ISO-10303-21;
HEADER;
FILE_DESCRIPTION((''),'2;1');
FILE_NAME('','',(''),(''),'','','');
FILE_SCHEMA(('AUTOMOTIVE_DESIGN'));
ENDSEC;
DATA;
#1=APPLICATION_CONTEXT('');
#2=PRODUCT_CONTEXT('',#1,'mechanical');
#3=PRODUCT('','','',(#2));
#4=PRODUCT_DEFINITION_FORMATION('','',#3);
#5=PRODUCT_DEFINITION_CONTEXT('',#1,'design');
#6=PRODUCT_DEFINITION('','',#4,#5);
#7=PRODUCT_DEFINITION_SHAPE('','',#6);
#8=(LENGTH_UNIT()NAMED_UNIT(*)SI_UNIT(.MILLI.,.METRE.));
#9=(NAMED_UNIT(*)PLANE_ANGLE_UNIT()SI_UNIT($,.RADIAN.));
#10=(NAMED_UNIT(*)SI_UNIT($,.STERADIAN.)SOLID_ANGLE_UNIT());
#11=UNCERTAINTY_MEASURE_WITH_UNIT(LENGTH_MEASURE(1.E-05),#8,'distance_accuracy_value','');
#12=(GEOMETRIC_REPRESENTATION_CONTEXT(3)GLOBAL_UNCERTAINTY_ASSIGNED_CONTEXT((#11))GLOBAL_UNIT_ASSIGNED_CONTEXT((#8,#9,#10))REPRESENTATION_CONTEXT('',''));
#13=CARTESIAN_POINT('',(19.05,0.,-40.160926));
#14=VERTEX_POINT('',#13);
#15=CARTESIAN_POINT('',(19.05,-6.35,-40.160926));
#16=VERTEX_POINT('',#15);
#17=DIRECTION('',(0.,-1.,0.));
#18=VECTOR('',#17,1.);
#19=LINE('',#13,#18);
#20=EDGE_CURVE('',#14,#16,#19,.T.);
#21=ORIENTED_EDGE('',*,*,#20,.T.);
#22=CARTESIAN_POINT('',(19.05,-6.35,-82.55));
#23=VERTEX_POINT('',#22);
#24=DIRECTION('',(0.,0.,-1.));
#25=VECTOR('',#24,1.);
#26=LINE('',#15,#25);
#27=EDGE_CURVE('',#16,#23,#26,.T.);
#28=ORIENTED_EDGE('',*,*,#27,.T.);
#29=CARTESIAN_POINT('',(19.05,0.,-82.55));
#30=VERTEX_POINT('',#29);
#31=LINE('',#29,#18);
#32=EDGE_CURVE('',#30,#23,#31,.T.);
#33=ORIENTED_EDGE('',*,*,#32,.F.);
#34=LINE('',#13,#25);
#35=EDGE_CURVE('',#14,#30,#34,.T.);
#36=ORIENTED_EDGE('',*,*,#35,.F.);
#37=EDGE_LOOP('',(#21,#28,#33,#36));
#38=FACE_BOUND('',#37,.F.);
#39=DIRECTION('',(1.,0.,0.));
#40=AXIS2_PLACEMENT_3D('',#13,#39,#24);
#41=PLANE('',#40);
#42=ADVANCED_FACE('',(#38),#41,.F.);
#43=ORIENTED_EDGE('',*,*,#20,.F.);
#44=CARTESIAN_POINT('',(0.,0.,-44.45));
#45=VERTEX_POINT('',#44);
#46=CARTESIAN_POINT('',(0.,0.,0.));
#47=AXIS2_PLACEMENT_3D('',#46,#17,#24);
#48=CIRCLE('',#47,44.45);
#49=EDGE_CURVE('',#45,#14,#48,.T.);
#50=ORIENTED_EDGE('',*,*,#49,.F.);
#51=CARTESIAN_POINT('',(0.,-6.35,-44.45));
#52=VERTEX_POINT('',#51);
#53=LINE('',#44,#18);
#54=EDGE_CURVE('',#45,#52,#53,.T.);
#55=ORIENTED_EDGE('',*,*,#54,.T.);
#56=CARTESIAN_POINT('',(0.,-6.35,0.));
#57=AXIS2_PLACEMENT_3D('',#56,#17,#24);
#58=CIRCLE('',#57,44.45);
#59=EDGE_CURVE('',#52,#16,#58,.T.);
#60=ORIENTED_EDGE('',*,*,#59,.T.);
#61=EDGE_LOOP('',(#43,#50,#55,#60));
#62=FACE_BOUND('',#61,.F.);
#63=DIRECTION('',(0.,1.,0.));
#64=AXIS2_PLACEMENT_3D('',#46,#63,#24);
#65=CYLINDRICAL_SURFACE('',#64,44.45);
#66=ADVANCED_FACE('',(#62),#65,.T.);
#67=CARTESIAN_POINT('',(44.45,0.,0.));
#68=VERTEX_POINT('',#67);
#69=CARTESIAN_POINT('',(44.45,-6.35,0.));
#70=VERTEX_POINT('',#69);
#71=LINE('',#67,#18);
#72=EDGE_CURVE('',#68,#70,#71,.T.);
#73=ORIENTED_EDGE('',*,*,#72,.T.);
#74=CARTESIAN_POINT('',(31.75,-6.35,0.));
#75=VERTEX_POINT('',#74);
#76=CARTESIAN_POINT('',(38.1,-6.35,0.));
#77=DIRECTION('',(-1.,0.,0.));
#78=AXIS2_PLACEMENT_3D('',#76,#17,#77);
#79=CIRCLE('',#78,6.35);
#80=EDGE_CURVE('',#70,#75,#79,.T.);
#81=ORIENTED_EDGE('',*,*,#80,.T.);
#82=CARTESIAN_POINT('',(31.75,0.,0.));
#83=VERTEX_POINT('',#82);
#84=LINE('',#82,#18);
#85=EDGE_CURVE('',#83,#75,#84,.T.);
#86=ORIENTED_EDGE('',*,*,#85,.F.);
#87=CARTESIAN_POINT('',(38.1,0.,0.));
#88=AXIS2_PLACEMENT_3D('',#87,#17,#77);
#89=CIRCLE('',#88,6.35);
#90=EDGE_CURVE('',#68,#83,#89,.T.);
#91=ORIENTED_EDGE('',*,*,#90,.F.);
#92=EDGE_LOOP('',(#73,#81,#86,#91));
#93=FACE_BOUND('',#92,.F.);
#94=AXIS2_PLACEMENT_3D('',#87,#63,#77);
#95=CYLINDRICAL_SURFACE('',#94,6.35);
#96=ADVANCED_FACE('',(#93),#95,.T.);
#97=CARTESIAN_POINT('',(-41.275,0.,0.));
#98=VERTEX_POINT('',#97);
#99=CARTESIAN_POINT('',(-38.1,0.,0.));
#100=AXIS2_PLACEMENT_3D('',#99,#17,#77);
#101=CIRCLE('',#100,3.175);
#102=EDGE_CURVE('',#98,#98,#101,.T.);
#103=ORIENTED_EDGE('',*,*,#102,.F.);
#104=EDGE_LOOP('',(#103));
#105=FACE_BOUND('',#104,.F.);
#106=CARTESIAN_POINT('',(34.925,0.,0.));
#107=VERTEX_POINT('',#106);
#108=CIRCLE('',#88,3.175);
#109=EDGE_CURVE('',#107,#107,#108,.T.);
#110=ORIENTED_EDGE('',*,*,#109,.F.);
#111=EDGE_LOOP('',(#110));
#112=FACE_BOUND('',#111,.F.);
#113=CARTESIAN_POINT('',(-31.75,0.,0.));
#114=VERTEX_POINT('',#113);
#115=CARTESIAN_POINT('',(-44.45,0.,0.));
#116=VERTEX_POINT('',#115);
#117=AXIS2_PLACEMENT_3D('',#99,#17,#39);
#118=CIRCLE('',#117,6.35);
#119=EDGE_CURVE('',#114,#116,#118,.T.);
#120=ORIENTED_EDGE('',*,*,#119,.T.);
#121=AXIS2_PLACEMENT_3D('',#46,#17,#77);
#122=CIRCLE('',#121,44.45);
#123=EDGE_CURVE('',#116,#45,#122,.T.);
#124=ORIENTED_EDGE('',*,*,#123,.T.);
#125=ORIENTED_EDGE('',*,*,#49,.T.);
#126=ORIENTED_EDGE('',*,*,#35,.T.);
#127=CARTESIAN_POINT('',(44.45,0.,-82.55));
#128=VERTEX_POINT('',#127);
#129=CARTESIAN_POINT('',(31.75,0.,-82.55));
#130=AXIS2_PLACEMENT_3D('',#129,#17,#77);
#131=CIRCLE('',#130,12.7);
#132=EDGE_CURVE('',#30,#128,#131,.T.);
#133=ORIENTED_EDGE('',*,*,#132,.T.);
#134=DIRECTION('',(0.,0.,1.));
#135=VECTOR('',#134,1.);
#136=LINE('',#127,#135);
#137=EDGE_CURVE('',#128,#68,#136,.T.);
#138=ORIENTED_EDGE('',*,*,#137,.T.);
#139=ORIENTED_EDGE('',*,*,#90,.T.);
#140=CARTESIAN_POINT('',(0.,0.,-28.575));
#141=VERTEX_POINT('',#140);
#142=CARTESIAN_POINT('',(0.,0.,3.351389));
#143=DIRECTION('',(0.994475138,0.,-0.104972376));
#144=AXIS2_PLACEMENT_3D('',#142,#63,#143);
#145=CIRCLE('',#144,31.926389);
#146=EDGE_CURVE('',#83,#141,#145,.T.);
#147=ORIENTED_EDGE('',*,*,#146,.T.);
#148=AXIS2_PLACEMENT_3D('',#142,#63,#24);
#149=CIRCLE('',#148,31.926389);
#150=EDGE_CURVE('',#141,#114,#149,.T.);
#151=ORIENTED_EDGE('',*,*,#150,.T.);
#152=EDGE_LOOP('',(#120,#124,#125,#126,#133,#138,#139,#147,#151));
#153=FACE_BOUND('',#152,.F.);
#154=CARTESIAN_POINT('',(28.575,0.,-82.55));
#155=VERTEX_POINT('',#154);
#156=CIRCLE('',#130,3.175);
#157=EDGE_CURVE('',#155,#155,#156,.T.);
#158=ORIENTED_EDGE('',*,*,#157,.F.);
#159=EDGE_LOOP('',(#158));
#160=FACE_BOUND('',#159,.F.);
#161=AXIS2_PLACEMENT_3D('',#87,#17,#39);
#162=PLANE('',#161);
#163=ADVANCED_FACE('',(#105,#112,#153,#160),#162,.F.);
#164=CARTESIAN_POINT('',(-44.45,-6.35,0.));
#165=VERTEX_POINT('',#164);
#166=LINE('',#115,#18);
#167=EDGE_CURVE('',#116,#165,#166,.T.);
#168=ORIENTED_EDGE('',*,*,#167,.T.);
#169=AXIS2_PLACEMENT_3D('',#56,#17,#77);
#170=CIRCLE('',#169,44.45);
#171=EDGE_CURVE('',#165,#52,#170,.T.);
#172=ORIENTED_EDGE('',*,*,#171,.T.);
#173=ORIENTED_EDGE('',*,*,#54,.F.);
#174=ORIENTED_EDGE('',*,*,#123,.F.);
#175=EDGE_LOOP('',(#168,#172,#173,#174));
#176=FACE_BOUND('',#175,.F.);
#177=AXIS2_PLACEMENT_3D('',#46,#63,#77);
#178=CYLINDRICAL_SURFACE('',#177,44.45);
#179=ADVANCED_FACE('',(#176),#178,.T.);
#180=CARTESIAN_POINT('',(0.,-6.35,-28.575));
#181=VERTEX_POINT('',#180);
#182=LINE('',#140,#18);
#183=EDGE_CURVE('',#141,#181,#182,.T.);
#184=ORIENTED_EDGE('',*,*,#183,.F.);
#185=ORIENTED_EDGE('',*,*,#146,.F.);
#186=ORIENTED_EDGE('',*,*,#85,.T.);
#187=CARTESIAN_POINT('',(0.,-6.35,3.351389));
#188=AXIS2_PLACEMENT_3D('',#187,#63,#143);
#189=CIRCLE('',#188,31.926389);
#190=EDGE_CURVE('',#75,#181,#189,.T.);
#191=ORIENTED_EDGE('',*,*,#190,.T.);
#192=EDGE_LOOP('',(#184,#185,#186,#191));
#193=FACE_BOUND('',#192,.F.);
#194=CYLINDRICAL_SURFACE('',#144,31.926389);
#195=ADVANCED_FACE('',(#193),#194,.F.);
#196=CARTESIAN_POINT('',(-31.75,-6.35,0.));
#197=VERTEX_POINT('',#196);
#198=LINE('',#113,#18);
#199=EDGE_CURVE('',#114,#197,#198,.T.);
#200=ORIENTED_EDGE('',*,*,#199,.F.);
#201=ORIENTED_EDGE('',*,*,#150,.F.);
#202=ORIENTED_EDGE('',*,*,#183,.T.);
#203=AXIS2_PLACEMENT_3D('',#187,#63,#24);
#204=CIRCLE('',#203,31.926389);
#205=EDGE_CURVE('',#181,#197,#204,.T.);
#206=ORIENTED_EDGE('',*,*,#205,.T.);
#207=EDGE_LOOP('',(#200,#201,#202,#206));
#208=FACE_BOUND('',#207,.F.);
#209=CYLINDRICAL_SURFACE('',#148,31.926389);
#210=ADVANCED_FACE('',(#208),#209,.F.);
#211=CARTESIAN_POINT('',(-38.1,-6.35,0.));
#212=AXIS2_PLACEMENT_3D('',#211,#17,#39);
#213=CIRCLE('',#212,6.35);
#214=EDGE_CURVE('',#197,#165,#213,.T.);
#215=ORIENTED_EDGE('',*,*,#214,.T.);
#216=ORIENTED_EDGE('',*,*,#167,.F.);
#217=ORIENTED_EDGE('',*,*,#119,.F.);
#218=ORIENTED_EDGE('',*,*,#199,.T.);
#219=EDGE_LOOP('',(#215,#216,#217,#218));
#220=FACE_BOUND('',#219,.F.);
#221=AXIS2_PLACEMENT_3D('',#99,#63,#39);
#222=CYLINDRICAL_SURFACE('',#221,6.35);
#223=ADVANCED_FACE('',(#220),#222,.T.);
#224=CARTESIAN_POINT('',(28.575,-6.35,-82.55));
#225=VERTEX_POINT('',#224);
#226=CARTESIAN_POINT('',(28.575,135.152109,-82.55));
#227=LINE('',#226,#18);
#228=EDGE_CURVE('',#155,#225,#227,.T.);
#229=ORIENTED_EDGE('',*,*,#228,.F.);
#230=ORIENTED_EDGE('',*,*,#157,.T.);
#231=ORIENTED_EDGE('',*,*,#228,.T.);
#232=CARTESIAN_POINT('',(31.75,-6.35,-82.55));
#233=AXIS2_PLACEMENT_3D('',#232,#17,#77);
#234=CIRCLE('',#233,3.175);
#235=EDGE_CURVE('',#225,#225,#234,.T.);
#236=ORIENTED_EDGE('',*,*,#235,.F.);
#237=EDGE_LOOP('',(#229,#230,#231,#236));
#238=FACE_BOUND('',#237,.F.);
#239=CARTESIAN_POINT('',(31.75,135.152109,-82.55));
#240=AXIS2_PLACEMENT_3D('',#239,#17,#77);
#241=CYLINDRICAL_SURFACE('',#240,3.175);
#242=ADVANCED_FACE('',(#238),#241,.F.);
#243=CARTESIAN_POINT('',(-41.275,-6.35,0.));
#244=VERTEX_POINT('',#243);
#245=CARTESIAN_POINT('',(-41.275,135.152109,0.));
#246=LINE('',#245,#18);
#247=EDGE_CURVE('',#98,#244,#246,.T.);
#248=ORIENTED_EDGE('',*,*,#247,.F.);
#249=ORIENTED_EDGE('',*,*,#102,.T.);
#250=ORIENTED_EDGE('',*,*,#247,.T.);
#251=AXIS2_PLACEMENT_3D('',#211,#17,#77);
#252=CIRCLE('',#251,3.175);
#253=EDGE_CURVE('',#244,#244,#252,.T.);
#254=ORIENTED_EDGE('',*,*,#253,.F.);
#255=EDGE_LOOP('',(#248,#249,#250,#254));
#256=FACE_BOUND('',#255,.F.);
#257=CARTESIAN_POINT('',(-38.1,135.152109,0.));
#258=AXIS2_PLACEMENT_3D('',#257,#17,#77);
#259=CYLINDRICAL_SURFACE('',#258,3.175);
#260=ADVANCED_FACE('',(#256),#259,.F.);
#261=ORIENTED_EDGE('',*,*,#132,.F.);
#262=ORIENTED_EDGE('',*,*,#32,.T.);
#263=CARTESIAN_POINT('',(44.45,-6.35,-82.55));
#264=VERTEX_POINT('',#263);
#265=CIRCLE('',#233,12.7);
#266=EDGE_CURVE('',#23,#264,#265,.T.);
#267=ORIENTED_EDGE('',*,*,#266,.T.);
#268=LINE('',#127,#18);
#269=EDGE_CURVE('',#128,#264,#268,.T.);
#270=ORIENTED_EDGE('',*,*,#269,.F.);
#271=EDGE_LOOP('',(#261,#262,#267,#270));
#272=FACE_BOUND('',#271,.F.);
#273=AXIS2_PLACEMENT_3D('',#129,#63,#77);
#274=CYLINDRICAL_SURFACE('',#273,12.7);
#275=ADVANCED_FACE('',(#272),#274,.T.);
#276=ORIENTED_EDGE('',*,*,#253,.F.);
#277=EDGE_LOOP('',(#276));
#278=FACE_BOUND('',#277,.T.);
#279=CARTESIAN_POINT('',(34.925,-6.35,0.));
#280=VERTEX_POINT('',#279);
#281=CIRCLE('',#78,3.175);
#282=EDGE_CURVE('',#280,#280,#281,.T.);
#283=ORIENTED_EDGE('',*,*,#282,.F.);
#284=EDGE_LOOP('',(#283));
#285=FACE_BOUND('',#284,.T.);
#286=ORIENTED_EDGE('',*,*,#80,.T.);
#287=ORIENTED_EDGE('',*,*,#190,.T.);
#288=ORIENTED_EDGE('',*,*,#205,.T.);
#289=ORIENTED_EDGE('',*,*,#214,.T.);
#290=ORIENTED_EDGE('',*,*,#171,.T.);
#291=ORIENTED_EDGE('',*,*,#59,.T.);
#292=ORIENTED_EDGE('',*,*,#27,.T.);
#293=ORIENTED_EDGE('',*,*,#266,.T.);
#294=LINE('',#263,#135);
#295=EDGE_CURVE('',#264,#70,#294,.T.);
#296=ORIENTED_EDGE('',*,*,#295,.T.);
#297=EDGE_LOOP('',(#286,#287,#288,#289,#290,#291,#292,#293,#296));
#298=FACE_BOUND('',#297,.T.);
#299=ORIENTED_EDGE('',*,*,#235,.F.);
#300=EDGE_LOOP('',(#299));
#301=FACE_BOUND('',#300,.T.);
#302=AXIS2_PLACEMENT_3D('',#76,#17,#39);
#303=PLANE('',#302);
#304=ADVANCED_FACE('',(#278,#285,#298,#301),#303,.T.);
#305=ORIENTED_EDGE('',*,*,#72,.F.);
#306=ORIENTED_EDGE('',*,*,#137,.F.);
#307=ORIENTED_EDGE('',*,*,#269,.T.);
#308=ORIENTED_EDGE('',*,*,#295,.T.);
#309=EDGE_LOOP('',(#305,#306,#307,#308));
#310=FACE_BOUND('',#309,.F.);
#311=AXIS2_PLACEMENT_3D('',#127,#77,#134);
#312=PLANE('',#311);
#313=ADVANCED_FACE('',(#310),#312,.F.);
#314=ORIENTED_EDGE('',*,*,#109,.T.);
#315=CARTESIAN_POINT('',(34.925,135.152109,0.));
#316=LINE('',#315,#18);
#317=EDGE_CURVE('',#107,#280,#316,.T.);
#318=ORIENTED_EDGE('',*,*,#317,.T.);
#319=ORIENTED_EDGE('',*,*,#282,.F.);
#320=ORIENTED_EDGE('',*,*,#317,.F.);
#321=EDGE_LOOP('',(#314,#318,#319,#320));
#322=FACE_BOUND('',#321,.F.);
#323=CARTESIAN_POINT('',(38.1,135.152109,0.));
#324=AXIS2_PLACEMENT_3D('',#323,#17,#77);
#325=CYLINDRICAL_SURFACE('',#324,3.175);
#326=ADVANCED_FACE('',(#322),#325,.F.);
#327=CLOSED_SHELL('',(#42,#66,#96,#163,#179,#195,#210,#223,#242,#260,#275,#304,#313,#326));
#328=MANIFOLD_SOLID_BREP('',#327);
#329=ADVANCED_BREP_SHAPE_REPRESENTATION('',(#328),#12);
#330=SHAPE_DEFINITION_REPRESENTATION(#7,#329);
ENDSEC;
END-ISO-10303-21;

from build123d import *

# Parameters (mm, degrees)
F1_DEPTH = 6.35
F2_D     = 6.35


# Not quite as in the source:
# - a feature names something its author has since deleted; it is built from what else it names


with BuildPart() as f1:
    # F0 (on Front) → F1 (new body)
    with BuildSketch(Plane.XZ):
        with BuildLine():
            ThreePointArc((44.45, 0), (38.1, 6.35), (31.75, 0))
            ThreePointArc((31.75, 0), (38.1, -6.35), (44.45, 0))
        make_face()
        with BuildLine():
            Line((31.75, -31.1085197333), (31.75, 0))
            ThreePointArc((31.75, 0), (21.3576281747, -20.379309083), (0, -28.575))
            ThreePointArc((0, -28.575), (-21.3576281747, -20.379309083), (-31.75, 0))
            ThreePointArc((-31.75, 0), (-38.1, -6.35), (-44.45, 0))
            ThreePointArc((-44.45, 0), (-31.4308964237, -31.4308964237), (0, -44.45))
            ThreePointArc((0, -44.45), (9.7634350172, -43.3644766677), (19.05, -40.1609262841))
            ThreePointArc((19.05, -40.1609262841), (25.8001262805, -36.1960769132), (31.75, -31.1085197333))
        make_face()
        with BuildLine():
            ThreePointArc((44.45, 0), (38.1, -6.35), (31.75, 0))
            Line((31.75, 0), (31.75, -31.1085197333))
            ThreePointArc((31.75, -31.1085197333), (41.1527034349, -16.8005208253), (44.45, 0))
        make_face()
        with BuildLine():
            ThreePointArc((-44.45, 0), (-38.1, -6.35), (-31.75, 0))
            ThreePointArc((-31.75, 0), (-38.1, 6.35), (-44.45, 0))
        make_face()
        with BuildLine():
            Line((44.45, -44.45), (44.45, 0))
            ThreePointArc((44.45, 0), (41.1527034349, -16.8005208253), (31.75, -31.1085197333))
            Line((31.75, -31.1085197333), (31.75, -44.45))
            Line((31.75, -44.45), (44.45, -44.45))
        make_face()
        with BuildLine():
            Line((31.75, -44.45), (31.75, -31.1085197333))
            ThreePointArc((31.75, -31.1085197333), (25.8001262805, -36.1960769132), (19.05, -40.1609262841))
            Line((19.05, -40.1609262841), (19.05, -44.45))
            Line((19.05, -44.45), (31.75, -44.45))
        make_face()
        with BuildLine():
            Line((44.45, -82.55), (44.45, -44.45))
            Line((44.45, -44.45), (31.75, -44.45))
            Line((31.75, -44.45), (31.75, -69.85))
            ThreePointArc((31.75, -69.85), (40.7302561211, -73.5697438789), (44.45, -82.55))
        make_face()
        with BuildLine():
            Line((31.75, -69.85), (31.75, -44.45))
            Line((31.75, -44.45), (19.05, -44.45))
            Line((19.05, -44.45), (19.05, -82.55))
            ThreePointArc((19.05, -82.55), (22.7697438789, -73.5697438789), (31.75, -69.85))
        make_face()
        with BuildLine():
            Line((31.75, -82.55), (44.45, -82.55))
            ThreePointArc((44.45, -82.55), (40.7302561211, -73.5697438789), (31.75, -69.85))
            Line((31.75, -69.85), (31.75, -82.55))
        make_face()
        with BuildLine():
            ThreePointArc((19.05, -82.55), (31.75, -95.25), (44.45, -82.55))
            Line((44.45, -82.55), (31.75, -82.55))
            Line((31.75, -82.55), (19.05, -82.55))
        make_face()
        with BuildLine():
            Line((31.75, -82.55), (31.75, -69.85))
            ThreePointArc((31.75, -69.85), (22.7697438789, -73.5697438789), (19.05, -82.55))
            Line((19.05, -82.55), (31.75, -82.55))
        make_face()
    extrude(amount=F1_DEPTH)

    # F2 (through all)
    with Locations(Plane(origin=(0, 0, 0), x_dir=(1, 0, 0), z_dir=(0, 1, 0))):
        with Locations((-38.1, 0), (38.1, 0), (31.75, 82.55)):
            Hole(F2_D / 2)


solid = f1.part
